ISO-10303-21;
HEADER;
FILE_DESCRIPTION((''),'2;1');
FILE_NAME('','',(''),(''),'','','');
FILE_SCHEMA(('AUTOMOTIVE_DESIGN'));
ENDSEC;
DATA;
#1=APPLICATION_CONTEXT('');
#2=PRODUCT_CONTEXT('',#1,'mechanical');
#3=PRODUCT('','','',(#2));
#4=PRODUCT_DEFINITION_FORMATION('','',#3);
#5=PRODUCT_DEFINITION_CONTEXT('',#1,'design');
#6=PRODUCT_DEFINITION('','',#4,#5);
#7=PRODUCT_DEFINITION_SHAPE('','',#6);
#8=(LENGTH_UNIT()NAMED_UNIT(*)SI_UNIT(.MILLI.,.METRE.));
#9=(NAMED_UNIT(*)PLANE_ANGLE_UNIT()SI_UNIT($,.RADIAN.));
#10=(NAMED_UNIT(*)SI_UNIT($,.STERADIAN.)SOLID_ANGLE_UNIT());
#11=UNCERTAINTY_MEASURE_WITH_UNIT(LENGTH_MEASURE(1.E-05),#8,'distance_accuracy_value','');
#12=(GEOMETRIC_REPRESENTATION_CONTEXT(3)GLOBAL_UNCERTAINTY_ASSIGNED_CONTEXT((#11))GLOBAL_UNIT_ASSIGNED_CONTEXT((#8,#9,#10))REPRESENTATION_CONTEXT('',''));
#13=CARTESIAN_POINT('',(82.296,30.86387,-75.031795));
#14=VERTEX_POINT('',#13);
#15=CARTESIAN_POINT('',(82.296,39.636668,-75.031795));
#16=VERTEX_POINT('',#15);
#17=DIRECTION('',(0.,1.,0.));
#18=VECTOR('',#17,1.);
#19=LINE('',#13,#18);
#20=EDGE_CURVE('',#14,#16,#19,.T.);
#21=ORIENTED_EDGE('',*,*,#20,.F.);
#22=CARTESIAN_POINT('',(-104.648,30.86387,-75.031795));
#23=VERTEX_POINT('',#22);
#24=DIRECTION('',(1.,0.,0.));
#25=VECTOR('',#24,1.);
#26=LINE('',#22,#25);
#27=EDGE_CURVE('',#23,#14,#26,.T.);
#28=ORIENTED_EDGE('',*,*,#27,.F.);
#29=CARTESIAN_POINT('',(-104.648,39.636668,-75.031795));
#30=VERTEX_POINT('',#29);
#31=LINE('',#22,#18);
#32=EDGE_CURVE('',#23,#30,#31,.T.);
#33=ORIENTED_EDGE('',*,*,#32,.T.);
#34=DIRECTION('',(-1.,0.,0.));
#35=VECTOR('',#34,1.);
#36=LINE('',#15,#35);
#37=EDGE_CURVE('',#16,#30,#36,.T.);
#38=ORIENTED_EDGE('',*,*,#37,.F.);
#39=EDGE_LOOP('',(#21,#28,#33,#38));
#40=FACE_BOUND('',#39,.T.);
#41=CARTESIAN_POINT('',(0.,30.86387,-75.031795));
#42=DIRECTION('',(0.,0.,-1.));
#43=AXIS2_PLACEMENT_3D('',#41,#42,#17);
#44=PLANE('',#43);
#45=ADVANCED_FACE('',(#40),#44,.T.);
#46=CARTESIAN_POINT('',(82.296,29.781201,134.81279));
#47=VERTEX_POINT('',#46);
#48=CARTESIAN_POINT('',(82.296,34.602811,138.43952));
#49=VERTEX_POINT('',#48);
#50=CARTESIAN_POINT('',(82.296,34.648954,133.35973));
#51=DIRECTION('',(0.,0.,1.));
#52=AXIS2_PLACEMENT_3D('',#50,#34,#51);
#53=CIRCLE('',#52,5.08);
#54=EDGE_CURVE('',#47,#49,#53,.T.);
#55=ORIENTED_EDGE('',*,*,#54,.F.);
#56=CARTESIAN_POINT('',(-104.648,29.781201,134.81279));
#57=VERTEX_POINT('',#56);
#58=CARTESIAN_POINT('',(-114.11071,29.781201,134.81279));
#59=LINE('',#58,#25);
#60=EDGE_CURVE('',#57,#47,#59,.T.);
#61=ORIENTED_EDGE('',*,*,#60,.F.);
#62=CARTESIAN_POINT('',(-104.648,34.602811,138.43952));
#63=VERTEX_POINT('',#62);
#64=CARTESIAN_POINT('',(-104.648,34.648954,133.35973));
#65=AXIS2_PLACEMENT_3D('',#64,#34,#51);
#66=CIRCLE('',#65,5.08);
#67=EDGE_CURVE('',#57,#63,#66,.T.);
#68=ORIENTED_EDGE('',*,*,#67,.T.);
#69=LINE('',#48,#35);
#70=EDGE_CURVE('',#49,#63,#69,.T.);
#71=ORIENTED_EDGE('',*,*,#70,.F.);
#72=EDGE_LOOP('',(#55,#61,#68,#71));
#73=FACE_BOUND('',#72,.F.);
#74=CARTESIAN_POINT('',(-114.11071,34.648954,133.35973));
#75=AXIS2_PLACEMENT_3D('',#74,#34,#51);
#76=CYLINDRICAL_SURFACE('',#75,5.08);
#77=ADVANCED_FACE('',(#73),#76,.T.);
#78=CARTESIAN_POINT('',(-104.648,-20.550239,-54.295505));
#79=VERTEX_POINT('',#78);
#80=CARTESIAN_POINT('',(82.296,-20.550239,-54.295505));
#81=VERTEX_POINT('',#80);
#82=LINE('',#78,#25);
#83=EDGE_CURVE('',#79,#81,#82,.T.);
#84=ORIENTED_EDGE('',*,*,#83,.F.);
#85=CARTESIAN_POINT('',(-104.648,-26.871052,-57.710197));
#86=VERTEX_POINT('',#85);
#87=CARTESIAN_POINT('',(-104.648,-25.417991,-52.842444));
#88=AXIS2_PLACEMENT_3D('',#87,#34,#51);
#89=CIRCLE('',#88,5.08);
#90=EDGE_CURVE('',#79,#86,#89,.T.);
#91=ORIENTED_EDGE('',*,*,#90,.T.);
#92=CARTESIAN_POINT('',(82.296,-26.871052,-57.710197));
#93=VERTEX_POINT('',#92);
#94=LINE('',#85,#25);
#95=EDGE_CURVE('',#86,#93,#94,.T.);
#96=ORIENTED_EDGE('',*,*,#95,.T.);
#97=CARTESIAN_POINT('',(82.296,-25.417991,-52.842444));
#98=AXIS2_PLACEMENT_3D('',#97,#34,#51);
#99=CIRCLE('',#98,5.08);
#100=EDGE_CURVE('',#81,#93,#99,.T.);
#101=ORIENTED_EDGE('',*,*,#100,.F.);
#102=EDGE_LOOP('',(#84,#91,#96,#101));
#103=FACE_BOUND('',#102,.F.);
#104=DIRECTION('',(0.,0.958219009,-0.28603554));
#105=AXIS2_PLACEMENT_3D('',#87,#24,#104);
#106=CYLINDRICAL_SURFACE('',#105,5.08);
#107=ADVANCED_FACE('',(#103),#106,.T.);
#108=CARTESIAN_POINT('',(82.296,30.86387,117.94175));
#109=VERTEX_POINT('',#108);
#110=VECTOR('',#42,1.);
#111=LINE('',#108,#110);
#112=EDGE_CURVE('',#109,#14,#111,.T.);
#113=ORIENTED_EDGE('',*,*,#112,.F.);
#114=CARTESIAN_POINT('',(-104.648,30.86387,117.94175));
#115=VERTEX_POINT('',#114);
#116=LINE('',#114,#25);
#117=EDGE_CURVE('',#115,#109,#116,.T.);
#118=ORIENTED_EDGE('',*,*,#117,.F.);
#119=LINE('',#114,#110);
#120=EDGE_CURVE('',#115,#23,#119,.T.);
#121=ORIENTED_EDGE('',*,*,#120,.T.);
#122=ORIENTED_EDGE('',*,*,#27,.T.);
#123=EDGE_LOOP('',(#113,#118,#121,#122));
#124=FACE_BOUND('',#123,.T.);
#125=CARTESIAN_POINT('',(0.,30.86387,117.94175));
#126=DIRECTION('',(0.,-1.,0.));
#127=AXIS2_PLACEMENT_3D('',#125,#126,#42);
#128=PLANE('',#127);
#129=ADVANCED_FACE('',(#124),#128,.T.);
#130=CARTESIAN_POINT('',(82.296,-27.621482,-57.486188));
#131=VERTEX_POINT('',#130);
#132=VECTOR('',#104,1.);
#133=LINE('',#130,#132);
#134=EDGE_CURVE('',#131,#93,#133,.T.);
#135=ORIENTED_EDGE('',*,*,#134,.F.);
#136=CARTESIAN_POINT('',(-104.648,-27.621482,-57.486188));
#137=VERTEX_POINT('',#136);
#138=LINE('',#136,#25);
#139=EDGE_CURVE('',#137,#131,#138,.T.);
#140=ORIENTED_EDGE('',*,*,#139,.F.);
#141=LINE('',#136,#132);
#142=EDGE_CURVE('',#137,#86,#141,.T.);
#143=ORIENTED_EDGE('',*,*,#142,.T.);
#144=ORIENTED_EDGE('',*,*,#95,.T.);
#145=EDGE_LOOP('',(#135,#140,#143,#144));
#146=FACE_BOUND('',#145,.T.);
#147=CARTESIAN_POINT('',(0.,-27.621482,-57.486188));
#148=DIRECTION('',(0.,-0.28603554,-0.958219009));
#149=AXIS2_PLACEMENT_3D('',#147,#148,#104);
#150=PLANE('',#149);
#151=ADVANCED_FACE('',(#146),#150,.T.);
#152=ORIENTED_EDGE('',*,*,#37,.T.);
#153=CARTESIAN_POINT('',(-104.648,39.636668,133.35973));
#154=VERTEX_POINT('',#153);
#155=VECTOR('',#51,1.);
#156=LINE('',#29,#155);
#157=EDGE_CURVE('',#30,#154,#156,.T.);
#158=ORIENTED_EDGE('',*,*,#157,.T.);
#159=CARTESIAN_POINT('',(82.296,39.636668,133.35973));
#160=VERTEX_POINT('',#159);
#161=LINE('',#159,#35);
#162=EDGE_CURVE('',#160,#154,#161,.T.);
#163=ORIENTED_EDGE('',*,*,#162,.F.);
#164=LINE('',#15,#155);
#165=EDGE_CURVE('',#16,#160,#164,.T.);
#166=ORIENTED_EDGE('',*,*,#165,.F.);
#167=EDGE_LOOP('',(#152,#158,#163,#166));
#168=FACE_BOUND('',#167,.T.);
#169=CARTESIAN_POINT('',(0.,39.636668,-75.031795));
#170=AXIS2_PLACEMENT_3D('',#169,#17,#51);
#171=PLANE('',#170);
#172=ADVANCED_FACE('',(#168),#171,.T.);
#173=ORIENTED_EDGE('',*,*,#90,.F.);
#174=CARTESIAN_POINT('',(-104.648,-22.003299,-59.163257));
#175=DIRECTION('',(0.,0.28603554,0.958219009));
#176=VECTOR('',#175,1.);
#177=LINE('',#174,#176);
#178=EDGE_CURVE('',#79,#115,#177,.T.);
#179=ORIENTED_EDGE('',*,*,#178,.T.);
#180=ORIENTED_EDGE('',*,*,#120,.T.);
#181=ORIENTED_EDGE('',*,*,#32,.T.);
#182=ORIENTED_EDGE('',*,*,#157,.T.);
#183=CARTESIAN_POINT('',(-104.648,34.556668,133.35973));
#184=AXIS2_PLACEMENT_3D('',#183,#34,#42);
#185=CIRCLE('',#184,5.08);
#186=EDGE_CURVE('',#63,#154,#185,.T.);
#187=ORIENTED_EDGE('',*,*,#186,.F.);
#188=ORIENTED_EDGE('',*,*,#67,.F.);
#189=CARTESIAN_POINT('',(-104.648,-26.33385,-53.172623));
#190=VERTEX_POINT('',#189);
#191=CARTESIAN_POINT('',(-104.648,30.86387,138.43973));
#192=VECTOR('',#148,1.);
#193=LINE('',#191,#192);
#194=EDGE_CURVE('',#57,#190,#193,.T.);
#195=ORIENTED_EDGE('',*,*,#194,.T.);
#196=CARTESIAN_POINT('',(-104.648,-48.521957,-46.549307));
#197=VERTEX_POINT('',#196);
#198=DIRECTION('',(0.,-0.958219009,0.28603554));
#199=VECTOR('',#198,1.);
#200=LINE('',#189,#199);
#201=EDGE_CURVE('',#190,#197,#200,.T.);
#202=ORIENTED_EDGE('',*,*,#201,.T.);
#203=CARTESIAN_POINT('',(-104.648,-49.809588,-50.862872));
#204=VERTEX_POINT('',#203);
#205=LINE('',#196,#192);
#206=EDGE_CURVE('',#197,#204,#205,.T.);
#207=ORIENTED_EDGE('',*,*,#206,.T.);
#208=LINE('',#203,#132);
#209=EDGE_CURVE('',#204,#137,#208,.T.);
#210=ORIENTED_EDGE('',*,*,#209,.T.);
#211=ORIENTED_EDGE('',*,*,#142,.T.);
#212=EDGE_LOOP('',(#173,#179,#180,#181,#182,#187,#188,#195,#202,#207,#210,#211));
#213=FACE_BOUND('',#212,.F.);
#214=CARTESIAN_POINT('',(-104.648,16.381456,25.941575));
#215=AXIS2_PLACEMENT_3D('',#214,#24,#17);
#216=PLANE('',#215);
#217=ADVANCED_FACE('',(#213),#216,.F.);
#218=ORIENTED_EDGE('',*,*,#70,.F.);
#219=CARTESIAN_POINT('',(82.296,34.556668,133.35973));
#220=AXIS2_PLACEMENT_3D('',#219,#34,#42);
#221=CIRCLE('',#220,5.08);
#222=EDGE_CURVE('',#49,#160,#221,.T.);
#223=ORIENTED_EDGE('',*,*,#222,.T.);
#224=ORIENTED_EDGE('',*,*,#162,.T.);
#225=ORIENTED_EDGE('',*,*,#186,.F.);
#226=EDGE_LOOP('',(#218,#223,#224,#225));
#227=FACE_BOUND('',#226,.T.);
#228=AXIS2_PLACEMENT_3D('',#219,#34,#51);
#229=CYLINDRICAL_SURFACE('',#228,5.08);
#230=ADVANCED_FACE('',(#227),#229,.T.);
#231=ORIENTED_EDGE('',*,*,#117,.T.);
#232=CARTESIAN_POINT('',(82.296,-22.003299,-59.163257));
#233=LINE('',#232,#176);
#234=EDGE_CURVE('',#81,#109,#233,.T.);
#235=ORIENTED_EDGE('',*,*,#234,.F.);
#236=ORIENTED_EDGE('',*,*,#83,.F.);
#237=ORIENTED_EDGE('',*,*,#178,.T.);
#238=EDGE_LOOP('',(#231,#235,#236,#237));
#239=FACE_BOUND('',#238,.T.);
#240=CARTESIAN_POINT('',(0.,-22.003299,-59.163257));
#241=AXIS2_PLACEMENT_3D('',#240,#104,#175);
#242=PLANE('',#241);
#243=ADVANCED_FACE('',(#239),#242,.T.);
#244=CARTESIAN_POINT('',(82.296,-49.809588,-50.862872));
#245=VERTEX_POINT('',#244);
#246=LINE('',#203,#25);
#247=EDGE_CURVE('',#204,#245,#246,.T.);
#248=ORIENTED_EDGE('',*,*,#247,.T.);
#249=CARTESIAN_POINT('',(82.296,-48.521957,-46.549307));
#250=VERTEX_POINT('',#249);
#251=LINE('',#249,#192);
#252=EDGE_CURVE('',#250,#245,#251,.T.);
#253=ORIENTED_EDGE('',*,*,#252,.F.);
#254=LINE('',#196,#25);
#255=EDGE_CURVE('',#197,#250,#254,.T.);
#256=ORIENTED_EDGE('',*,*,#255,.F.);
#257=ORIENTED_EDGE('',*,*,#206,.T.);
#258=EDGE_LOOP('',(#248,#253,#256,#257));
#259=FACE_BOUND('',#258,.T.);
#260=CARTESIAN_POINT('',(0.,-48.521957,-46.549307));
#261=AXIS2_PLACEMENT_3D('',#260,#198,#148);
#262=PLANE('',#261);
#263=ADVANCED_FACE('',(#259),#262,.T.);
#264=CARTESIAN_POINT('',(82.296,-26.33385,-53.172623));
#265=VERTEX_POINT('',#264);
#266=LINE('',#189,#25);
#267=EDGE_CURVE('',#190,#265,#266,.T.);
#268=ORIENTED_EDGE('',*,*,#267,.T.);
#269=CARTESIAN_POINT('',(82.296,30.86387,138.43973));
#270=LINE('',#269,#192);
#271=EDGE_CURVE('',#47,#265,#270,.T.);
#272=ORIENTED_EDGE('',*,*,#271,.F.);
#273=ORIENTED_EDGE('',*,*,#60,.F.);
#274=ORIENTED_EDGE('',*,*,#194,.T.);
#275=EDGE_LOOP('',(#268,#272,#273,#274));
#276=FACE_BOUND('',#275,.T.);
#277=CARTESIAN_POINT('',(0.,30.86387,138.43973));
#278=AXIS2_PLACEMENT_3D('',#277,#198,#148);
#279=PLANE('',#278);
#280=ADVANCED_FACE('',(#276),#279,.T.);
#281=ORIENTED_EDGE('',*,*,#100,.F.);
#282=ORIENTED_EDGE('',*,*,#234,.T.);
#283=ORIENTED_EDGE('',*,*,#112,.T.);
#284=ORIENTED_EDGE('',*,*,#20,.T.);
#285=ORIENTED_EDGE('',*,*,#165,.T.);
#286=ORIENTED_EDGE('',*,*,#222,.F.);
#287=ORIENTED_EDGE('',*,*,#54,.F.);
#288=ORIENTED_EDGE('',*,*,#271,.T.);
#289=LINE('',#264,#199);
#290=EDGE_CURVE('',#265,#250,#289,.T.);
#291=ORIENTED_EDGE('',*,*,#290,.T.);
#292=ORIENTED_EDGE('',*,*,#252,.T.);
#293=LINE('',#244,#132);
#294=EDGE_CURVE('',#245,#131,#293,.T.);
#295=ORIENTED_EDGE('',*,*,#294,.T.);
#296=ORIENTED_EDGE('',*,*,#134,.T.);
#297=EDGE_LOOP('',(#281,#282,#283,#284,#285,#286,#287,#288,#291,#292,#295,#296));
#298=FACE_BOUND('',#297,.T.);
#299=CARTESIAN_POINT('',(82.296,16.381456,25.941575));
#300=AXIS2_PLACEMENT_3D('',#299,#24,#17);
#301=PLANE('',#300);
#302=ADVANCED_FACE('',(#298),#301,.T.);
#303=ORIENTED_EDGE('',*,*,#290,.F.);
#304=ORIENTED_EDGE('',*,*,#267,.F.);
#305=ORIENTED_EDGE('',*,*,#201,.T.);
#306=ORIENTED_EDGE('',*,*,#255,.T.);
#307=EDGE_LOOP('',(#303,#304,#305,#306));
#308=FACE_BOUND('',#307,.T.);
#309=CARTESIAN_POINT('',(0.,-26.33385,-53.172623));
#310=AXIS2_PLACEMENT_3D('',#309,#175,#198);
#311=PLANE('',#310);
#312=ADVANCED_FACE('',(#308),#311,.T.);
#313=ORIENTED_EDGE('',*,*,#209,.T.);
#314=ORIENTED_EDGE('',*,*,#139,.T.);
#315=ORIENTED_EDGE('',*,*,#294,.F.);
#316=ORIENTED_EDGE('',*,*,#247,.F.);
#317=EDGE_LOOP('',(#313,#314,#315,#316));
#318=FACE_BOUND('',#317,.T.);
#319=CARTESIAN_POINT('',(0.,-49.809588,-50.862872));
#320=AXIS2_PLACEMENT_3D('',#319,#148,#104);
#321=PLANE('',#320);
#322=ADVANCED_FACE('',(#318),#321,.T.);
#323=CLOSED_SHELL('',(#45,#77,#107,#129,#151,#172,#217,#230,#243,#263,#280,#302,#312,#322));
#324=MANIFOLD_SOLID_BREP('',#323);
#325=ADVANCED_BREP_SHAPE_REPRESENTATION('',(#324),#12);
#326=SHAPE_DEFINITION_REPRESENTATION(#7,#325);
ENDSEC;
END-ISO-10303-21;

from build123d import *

# Parameters (mm, degrees)
F1_DEPTH      = 82.296
F1_DEPTH_BACK = 104.648
F2_R          = 5.08
F3_T1_DEPTH   = 205.8694200864
F4_R          = 5.08


# Not quite as in the source:
# - a fillet or chamfer that OpenCascade refuses, or shapes differently, is made with other operations: its cross-section is extruded or revolved along the edge and cut away or added


with BuildPart() as f1:
    # F0 (on Right) → F1 (new body, two sides)
    with BuildSketch(Plane.YZ) as f1_sk:
        Polygon((30.8638699353, 138.4397298098), (-26.3338502244, -53.1726228883), (-48.5219567113, -46.5493071791), (-49.8095880545, -50.8628719574), (-27.6214815676, -57.4861876667), (-22.003299054, -59.1632571598), (30.8638699353, 117.9417498623), (30.8638699353, -75.0317946076), (39.6366678178, -75.0317946076), (39.6366678178, 138.4397298098), align=None)
    extrude(amount=F1_DEPTH)
    extrude(f1_sk.sketch, amount=-F1_DEPTH_BACK)

    # F2
    f2_edges = [f1.edges().sort_by_distance(p)[0] for p in [
        (-11.176, 39.636668, 138.43973),
    ]]
    fillet(f2_edges, radius=F2_R)

    # F3: fillet of radius 5.08 on 1 edges, made by hand

    # F3_s2 → F3_t1 (cut)
    with BuildSketch(Plane.YZ.offset(-114.1107100432)):
        with BuildLine():
            ThreePointArc((34.6489539526, 138.4397298098), (31.6137560641, 137.4332999611), (29.7812013849, 134.8127903523))
            Line((29.7812013849, 134.8127903523), (30.8638699353, 138.4397298098))
            Line((30.8638699353, 138.4397298098), (34.6489539526, 138.4397298098))
        make_face()
    extrude(amount=F3_T1_DEPTH, mode=Mode.SUBTRACT)

    # F4
    f4_edges = [f1.edges().sort_by_distance(p)[0] for p in [
        (-11.176, -22.003299, -59.163257),
    ]]
    fillet(f4_edges, radius=F4_R)


solid = f1.part
